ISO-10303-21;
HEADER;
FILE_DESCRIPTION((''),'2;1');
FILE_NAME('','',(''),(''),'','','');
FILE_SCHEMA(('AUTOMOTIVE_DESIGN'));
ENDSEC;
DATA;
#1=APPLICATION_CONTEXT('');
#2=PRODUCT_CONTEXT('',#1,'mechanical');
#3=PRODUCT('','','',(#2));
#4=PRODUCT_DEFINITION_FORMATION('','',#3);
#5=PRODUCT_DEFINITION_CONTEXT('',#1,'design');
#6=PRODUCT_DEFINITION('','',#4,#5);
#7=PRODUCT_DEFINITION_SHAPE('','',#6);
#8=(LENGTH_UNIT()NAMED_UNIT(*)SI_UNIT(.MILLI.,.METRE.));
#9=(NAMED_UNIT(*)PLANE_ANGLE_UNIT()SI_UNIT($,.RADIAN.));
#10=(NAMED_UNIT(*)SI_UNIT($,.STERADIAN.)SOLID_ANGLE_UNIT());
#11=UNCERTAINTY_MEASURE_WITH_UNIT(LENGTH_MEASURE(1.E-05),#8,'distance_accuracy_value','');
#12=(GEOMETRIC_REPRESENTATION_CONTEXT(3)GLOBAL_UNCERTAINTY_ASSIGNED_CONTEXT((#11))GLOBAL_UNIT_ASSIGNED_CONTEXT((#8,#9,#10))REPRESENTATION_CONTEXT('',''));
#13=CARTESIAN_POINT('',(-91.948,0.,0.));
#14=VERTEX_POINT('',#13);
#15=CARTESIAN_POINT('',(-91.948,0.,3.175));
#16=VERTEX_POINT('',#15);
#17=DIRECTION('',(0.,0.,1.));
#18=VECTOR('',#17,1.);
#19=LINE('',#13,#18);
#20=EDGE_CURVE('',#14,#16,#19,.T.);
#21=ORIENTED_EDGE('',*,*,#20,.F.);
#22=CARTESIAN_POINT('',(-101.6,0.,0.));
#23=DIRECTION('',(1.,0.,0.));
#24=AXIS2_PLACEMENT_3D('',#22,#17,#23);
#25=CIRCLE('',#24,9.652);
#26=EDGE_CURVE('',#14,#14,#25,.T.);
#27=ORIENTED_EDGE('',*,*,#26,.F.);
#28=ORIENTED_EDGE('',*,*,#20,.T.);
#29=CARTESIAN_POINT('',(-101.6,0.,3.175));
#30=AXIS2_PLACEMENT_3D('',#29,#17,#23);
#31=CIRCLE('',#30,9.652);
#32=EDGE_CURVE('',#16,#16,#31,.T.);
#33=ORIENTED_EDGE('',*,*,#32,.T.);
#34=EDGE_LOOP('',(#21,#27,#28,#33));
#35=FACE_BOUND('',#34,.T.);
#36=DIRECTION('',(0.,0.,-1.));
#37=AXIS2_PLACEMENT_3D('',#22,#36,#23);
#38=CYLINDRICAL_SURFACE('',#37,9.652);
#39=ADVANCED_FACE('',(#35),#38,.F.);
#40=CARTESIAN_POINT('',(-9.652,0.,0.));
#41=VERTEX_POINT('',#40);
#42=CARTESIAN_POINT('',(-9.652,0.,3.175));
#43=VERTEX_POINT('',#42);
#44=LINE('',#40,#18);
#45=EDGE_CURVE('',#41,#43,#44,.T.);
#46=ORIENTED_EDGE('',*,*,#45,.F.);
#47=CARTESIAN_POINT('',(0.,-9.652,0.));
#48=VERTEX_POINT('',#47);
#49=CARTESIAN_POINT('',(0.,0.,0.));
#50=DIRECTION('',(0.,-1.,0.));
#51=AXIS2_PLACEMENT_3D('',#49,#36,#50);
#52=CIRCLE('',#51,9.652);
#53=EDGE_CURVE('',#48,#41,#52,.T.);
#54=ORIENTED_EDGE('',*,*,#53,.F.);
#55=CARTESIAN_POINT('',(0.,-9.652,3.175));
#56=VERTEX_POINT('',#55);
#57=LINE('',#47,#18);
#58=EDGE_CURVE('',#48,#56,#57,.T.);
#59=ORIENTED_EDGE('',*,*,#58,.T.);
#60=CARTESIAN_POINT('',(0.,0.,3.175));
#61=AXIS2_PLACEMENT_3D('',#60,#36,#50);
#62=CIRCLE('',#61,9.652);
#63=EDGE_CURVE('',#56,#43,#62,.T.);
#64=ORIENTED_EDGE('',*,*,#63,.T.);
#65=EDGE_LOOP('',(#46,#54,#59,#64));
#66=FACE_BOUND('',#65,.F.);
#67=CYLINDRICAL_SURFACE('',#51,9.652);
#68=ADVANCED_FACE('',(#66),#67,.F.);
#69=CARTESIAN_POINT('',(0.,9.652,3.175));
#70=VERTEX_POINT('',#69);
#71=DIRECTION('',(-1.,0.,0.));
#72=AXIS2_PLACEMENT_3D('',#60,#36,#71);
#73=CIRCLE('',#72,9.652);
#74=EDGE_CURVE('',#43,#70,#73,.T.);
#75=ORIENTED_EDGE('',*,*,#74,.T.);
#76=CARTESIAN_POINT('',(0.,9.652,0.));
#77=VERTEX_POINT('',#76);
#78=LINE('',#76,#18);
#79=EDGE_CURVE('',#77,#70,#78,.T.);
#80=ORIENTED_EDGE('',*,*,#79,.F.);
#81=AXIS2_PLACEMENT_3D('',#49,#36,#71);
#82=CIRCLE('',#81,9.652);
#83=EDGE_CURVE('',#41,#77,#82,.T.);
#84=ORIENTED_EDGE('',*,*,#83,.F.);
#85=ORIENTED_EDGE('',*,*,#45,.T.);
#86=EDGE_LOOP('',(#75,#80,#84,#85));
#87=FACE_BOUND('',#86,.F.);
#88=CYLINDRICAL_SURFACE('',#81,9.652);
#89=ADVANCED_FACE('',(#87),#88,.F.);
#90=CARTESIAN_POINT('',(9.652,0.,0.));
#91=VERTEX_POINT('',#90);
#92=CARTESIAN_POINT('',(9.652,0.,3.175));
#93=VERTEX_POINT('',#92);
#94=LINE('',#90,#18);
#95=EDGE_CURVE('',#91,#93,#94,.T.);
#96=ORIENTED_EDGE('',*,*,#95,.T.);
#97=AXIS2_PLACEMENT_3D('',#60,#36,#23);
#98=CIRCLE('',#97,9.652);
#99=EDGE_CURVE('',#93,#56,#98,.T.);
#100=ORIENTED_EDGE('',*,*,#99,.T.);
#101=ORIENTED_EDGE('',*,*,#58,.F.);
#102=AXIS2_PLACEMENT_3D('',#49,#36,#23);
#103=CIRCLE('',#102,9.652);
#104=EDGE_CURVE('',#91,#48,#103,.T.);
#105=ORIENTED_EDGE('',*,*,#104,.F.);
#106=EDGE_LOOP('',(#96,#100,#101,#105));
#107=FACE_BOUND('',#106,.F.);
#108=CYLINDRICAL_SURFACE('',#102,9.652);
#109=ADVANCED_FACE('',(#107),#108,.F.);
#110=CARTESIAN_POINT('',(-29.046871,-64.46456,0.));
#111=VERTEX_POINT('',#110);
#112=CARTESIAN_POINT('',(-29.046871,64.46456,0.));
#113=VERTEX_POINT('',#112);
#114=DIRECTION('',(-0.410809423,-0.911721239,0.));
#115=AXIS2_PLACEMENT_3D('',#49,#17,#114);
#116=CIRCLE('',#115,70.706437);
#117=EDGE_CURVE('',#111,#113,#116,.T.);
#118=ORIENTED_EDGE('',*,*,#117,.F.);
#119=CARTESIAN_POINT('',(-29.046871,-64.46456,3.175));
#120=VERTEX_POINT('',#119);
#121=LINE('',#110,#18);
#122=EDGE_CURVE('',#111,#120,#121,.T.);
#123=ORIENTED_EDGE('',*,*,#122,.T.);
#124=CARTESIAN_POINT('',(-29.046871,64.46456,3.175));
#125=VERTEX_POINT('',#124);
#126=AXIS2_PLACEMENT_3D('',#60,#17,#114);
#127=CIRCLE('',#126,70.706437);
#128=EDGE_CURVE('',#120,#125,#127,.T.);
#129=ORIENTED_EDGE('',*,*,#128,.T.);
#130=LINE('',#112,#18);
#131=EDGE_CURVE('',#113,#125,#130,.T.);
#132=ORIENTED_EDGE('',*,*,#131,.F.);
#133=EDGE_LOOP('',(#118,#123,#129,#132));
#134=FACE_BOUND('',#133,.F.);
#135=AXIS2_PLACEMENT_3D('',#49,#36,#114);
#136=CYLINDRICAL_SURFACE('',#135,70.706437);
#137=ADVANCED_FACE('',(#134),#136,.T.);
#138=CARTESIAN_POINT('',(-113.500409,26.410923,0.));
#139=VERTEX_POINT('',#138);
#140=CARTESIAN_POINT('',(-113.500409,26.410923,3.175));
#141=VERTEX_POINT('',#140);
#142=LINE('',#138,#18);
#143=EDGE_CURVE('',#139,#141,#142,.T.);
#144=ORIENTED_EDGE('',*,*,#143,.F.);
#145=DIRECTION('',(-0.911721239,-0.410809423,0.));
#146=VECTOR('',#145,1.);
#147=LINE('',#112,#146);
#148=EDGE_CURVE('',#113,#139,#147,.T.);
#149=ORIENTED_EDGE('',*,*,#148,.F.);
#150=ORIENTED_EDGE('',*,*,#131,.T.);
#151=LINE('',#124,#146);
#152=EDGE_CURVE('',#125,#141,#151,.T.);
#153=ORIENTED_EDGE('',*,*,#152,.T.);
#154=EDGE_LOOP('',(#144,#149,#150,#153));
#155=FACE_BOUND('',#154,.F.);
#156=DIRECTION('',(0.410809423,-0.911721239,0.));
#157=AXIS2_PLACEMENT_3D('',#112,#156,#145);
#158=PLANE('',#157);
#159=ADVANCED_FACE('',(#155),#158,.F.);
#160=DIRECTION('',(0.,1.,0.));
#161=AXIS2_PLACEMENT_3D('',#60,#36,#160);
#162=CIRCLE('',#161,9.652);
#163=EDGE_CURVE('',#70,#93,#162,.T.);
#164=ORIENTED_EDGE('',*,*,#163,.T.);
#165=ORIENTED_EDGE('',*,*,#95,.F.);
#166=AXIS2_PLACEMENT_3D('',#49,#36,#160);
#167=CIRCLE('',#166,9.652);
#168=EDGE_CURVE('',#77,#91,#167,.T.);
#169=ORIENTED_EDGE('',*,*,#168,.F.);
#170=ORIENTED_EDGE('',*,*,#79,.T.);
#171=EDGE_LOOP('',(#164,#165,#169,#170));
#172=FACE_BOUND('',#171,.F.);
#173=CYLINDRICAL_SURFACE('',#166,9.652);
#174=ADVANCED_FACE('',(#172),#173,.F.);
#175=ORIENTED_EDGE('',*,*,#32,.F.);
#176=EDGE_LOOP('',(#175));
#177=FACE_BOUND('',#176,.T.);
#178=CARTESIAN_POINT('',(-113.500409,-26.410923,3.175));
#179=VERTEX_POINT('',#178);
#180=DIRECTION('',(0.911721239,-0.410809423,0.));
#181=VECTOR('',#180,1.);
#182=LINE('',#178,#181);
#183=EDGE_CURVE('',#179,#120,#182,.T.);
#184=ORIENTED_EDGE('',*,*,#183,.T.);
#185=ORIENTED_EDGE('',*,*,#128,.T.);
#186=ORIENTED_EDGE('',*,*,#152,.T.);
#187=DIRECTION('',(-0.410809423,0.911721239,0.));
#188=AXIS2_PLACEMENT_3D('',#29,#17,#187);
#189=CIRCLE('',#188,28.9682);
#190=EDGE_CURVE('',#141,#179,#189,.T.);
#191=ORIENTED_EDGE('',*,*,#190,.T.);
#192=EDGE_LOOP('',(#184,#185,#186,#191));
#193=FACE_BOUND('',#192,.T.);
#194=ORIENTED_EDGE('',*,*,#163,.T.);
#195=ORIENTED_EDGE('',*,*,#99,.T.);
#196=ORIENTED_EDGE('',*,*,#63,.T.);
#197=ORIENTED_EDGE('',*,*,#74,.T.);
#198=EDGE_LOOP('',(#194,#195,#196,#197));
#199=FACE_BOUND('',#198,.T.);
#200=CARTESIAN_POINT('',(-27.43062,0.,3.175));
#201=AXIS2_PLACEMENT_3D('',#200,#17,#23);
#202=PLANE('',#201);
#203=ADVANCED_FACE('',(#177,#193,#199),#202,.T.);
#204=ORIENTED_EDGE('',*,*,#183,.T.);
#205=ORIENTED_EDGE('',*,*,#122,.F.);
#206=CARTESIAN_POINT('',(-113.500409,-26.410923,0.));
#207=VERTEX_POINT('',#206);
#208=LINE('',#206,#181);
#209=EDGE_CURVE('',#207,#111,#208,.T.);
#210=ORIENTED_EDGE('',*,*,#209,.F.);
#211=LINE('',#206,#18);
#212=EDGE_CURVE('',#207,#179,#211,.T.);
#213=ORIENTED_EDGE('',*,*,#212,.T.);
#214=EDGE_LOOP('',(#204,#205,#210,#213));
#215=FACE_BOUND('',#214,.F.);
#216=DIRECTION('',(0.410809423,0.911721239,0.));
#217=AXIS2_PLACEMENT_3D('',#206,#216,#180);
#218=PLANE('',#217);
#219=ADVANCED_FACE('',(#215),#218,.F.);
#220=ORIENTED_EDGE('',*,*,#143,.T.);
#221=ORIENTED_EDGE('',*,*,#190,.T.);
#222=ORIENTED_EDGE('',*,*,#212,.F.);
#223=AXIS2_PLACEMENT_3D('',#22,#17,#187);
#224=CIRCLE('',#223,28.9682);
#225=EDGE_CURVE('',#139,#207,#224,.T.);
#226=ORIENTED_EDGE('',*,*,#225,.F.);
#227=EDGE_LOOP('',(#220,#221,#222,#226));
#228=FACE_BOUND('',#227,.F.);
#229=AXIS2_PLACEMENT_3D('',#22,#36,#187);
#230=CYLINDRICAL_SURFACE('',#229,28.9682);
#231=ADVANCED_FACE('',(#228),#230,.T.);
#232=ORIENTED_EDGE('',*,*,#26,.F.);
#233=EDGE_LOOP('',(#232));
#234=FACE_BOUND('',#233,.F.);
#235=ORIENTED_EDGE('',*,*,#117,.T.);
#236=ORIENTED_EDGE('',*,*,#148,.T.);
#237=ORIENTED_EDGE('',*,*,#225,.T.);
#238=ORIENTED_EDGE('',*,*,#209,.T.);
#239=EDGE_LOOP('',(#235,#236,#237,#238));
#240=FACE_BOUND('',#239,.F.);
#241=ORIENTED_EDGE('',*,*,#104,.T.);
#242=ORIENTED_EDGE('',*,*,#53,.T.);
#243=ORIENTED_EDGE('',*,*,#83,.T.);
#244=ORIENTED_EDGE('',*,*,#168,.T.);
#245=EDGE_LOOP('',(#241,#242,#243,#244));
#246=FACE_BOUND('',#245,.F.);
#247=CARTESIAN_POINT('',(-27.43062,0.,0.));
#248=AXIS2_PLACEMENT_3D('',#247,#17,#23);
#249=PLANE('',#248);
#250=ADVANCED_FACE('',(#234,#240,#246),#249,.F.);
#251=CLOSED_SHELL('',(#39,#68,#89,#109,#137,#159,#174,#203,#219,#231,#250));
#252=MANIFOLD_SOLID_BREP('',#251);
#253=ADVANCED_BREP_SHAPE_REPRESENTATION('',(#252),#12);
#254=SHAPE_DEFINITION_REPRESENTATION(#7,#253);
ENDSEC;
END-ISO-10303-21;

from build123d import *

# Parameters (mm, degrees)
F0_R     = 13.9065
F0_R_2   = 9.652
F1_DEPTH = 3.175


# Not quite as in the source:
# - a length typed as a fraction of an inch, garbled in the dataset ("3 / 203.2 mm" for 3/8 in), is restored


with BuildPart() as f1:
    # F0 (on Top) → F1 (new body)
    with BuildSketch(Plane.XY):
        with BuildLine():
            Line((-29.0468705796, 64.4645603781), (-113.5004093806, 26.4109228888))
            ThreePointArc((-113.5004093806, 26.4109228888), (-130.5681996552, 0), (-113.5004093806, -26.4109228888))
            Line((-113.5004093806, -26.4109228888), (-29.0468705796, -64.4645603781))
            ThreePointArc((-29.0468705796, -64.4645603781), (70.706437014, 0), (-29.0468705796, 64.4645603781))
        make_face()
        with Locations((-101.6, 0)):
            Circle(F0_R, mode=Mode.SUBTRACT)
        with BuildLine():
            ThreePointArc((0, 64.77), (45.7993062175, 45.7993062175), (64.77, 0))
            ThreePointArc((64.77, 0), (45.7993062175, -45.7993062175), (0, -64.77))
            ThreePointArc((0, -64.77), (-45.7993062175, -45.7993062175), (-64.77, 0))
            ThreePointArc((-64.77, 0), (-45.7993062175, 45.7993062175), (0, 64.77))
        make_face(mode=Mode.SUBTRACT)
        with Locations((-101.6, 0)):
            Circle(F0_R)
        with Locations((-101.6, 0)):
            Circle(F0_R_2, mode=Mode.SUBTRACT)
        with BuildLine():
            Line((0, 9.652), (0, 64.77))
            ThreePointArc((0, 64.77), (-45.7993062175, 45.7993062175), (-64.77, 0))
            Line((-64.77, 0), (-9.652, 0))
            ThreePointArc((-9.652, 0), (-6.824994652, 6.824994652), (0, 9.652))
        make_face()
        with BuildLine():
            ThreePointArc((-64.77, 0), (-45.7993062175, -45.7993062175), (0, -64.77))
            Line((0, -64.77), (0, -9.652))
            ThreePointArc((0, -9.652), (-6.824994652, -6.824994652), (-9.652, 0))
            Line((-9.652, 0), (-64.77, 0))
        make_face()
        with BuildLine():
            ThreePointArc((0, -64.77), (45.7993062175, -45.7993062175), (64.77, 0))
            ThreePointArc((64.77, 0), (45.7993062175, 45.7993062175), (0, 64.77))
            Line((0, 64.77), (0, 9.652))
            ThreePointArc((0, 9.652), (6.824994652, 6.824994652), (9.652, 0))
            ThreePointArc((9.652, 0), (6.824994652, -6.824994652), (0, -9.652))
            Line((0, -9.652), (0, -64.77))
        make_face()
    extrude(amount=F1_DEPTH)


solid = f1.part
